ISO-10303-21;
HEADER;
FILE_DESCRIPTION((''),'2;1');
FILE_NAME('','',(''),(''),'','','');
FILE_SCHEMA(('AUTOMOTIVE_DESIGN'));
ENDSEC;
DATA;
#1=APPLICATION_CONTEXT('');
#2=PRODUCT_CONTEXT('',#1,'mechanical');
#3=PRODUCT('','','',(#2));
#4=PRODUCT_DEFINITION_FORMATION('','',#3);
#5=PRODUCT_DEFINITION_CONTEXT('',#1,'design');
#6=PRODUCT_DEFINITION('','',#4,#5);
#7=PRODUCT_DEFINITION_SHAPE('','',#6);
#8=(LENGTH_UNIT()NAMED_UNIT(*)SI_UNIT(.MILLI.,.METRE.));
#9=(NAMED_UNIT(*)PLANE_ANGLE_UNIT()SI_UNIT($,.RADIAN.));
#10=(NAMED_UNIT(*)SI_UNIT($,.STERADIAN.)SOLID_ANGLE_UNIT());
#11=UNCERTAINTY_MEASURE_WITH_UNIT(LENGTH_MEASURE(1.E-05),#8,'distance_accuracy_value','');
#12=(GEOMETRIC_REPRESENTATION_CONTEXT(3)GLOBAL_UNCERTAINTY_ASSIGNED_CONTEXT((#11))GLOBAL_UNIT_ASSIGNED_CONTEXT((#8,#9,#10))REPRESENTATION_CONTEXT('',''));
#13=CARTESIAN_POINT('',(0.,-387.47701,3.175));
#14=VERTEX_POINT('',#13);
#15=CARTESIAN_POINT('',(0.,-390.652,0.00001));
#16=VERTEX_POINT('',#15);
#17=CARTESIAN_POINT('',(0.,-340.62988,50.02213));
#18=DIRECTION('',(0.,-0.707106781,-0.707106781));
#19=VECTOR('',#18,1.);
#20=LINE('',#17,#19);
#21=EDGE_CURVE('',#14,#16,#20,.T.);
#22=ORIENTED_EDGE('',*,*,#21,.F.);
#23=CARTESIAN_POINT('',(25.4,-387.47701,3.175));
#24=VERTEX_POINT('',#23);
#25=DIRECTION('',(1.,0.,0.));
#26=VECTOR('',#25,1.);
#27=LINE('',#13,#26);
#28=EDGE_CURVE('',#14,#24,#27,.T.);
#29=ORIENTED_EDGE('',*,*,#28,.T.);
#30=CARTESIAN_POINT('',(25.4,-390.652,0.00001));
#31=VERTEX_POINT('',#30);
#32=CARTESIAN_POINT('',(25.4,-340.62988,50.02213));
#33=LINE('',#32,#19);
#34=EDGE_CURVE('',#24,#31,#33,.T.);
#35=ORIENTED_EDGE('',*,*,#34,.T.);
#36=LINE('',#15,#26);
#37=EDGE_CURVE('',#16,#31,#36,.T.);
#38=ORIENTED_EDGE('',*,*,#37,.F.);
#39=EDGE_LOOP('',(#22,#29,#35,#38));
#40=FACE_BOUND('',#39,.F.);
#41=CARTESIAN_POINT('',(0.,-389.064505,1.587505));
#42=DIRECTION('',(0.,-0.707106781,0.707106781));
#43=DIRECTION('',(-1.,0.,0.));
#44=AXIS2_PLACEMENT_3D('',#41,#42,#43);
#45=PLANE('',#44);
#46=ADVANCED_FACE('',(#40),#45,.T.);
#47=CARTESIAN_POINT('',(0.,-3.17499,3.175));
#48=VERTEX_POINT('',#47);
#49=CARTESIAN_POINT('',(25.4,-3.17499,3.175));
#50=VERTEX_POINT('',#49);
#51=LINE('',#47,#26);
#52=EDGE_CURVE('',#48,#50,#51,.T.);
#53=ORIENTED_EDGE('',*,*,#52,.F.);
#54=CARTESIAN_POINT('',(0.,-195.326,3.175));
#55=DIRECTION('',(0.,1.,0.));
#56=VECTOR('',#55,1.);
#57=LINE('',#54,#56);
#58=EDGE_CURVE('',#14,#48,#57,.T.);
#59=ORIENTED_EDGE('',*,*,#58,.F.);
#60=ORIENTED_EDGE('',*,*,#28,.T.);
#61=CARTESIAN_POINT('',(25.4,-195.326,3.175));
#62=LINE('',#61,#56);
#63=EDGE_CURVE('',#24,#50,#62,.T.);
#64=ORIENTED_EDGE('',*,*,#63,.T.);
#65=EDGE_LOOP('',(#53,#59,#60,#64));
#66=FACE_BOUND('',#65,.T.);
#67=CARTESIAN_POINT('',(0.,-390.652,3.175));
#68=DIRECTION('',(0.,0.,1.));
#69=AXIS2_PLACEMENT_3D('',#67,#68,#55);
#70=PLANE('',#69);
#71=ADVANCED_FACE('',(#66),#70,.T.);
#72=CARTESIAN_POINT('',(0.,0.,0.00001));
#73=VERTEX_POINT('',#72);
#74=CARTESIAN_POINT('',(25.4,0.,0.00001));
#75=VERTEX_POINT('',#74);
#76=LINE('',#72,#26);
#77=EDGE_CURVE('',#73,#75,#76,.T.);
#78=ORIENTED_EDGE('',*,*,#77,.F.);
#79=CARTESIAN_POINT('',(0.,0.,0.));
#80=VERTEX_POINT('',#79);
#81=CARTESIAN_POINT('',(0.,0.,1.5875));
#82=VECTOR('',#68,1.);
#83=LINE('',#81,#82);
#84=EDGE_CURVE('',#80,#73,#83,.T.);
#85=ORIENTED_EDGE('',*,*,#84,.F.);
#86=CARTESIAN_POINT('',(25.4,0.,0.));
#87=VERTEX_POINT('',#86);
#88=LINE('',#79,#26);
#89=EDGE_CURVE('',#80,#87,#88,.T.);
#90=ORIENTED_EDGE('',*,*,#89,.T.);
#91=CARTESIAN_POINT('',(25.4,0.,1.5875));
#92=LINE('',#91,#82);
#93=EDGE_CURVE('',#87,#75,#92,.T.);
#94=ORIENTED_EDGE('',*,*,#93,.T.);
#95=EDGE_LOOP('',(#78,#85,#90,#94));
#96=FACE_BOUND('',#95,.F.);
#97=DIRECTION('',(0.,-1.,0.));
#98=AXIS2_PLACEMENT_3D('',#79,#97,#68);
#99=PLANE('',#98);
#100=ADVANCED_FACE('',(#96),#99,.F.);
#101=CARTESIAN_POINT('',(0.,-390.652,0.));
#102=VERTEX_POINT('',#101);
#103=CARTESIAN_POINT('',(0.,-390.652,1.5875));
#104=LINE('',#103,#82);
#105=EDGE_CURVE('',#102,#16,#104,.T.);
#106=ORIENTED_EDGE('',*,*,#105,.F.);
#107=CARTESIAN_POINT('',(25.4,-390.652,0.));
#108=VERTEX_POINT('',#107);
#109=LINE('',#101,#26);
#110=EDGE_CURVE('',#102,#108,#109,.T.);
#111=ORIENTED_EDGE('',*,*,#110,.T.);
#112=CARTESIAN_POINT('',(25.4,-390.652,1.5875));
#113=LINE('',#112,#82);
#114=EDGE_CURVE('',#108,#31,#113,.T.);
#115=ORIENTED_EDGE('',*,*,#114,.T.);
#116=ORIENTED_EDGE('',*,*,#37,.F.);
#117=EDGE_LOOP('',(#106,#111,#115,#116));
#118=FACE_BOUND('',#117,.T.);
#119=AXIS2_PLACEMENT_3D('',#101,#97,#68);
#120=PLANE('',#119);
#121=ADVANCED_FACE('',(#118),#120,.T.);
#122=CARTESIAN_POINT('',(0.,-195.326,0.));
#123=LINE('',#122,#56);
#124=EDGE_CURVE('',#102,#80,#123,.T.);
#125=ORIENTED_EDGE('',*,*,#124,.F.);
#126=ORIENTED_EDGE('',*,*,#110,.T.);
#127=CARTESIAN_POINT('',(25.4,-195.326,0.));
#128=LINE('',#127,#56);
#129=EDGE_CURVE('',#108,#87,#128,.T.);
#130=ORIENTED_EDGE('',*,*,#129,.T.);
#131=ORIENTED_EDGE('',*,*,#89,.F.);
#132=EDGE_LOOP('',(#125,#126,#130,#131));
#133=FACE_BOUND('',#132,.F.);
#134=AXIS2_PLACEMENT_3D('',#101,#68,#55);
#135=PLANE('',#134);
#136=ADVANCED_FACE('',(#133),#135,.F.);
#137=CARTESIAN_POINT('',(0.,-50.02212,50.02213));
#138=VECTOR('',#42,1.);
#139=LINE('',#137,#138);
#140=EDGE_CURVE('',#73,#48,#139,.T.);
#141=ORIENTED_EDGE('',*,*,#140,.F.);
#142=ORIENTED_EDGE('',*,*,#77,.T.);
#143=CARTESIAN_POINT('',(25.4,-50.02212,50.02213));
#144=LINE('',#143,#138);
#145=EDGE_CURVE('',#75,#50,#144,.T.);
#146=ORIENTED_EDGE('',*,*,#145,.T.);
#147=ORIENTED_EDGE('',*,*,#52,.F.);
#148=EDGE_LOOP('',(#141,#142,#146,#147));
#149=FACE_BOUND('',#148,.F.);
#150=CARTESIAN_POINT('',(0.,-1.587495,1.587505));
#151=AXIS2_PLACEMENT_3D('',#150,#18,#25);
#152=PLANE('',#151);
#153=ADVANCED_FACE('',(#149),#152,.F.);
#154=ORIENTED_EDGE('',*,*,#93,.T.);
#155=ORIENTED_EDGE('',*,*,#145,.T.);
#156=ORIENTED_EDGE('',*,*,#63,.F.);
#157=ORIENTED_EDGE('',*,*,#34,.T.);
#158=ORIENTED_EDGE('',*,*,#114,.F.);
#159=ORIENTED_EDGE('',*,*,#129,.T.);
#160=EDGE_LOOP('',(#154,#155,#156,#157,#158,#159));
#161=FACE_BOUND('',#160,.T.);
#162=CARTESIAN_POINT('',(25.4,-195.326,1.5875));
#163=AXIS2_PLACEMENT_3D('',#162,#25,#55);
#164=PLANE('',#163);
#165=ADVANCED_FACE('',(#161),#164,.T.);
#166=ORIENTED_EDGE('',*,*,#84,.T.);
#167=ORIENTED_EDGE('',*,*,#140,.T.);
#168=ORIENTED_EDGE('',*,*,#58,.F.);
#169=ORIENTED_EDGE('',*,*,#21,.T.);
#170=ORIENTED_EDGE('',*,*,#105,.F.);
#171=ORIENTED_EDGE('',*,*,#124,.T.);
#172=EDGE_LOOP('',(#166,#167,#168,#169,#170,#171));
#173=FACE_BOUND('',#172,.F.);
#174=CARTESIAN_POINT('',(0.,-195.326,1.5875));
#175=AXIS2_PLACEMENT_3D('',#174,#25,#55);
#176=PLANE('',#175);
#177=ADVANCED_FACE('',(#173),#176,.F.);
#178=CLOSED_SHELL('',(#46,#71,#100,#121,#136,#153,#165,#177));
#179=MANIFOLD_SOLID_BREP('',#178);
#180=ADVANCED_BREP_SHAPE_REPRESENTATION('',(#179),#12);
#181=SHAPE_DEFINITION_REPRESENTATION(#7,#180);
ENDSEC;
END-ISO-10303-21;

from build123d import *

# Parameters (mm, degrees)
F0_W     = 390.652
F0_H     = 3.175
F1_DEPTH = 25.4
F2_SIZE  = 3.17499
F3_SIZE  = 3.17499


# Not quite as in the source:
# - a fillet or chamfer is up to 0.001 mm smaller than in the source, because OpenCascade refuses the exact size


with BuildPart() as f1:
    # F0 (on Right) → F1 (new body)
    with BuildSketch(Plane.YZ):
        with Locations((-195.326, 1.5875)):
            Rectangle(F0_W, F0_H)
    extrude(amount=F1_DEPTH)

    # F2 (size 3.175 in the source; OpenCascade refuses exactly that, so slightly less here)
    f2_edges = [f1.edges().sort_by_distance(p)[0] for p in [
        (12.7, 0, 3.175),
    ]]
    chamfer(f2_edges, length=F2_SIZE)

    # F3 (size 3.175 in the source; OpenCascade refuses exactly that, so slightly less here)
    f3_edges = [f1.edges().sort_by_distance(p)[0] for p in [
        (12.7, -390.652, 3.175),
    ]]
    chamfer(f3_edges, length=F3_SIZE)


solid = f1.part
